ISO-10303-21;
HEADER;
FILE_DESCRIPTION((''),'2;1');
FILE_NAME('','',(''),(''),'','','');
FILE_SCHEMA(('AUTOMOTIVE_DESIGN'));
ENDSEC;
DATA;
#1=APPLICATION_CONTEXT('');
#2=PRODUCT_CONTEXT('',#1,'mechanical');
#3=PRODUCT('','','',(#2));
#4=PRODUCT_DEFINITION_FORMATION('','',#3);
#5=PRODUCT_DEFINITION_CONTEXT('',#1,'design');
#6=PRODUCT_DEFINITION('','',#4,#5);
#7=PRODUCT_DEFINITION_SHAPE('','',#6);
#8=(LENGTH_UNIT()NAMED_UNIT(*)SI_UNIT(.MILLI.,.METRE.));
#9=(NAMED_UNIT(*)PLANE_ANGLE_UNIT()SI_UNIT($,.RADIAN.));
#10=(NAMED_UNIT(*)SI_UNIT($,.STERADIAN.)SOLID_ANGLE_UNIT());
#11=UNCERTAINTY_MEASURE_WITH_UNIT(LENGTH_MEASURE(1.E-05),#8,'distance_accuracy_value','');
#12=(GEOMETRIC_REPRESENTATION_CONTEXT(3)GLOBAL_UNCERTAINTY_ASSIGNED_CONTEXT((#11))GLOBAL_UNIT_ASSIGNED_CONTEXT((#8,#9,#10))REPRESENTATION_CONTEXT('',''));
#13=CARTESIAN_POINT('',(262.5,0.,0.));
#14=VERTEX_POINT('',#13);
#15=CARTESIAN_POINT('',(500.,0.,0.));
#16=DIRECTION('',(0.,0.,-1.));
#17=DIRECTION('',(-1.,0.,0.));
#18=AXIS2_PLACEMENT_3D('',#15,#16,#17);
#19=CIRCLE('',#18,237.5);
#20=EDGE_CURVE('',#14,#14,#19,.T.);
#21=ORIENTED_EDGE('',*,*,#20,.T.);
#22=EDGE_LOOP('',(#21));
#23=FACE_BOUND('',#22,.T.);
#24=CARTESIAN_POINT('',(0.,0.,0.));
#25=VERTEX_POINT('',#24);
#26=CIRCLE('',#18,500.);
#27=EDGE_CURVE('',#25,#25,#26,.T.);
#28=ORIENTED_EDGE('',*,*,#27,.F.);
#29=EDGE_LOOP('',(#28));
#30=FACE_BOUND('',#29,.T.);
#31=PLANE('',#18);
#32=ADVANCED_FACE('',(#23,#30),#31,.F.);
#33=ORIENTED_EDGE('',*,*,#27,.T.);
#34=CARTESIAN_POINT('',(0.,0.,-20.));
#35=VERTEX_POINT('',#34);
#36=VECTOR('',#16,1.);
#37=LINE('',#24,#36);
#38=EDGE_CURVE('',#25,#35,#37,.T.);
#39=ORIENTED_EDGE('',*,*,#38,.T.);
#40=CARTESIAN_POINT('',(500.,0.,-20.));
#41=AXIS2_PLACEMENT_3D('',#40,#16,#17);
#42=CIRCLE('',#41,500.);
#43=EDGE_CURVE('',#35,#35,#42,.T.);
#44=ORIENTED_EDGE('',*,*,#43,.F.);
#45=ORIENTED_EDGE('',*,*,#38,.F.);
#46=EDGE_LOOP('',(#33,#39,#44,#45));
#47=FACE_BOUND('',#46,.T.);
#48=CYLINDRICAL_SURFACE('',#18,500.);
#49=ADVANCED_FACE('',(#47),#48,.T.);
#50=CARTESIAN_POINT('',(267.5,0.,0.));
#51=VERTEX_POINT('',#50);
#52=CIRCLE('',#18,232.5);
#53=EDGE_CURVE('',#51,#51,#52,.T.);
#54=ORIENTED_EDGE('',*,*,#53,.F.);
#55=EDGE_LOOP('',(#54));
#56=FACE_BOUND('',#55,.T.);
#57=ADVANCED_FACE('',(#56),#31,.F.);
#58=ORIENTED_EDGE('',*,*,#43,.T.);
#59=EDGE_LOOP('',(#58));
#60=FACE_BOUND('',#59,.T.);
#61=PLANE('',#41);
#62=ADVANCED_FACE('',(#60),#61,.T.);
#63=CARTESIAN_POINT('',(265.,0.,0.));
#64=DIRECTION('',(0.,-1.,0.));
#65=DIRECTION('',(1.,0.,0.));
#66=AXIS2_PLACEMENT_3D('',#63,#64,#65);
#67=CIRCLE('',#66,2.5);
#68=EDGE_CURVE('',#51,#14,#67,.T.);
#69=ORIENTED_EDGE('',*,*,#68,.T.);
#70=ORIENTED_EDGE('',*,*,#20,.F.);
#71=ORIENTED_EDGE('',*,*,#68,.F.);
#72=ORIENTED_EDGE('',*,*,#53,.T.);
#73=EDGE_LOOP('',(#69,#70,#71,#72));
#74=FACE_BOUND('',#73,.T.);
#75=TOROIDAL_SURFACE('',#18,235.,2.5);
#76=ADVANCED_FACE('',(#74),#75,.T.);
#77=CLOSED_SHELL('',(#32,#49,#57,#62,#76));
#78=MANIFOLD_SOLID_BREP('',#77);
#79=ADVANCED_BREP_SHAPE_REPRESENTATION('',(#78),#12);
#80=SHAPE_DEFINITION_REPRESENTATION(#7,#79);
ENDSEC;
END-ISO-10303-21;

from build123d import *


# Not quite as in the source:
# - the program builds the solid bodies; features that only make, move or delete a surface that nothing else refers to are left out


with BuildPart() as f1:
    # F0 (on Front) → F1 (revolve)
    with BuildSketch(Plane.XZ):
        Polygon((262.5, 0), (0, 0), (0, -20), (500, -20), (500, 0), (267.5, 0), align=None)
        with BuildLine():
            ThreePointArc((267.5, 0), (265, 2.5), (262.5, 0))
            Line((262.5, 0), (267.5, 0))
        make_face()
    revolve(axis=Axis((500, 0, -10), (0, 0, -1)))


solid = f1.part
